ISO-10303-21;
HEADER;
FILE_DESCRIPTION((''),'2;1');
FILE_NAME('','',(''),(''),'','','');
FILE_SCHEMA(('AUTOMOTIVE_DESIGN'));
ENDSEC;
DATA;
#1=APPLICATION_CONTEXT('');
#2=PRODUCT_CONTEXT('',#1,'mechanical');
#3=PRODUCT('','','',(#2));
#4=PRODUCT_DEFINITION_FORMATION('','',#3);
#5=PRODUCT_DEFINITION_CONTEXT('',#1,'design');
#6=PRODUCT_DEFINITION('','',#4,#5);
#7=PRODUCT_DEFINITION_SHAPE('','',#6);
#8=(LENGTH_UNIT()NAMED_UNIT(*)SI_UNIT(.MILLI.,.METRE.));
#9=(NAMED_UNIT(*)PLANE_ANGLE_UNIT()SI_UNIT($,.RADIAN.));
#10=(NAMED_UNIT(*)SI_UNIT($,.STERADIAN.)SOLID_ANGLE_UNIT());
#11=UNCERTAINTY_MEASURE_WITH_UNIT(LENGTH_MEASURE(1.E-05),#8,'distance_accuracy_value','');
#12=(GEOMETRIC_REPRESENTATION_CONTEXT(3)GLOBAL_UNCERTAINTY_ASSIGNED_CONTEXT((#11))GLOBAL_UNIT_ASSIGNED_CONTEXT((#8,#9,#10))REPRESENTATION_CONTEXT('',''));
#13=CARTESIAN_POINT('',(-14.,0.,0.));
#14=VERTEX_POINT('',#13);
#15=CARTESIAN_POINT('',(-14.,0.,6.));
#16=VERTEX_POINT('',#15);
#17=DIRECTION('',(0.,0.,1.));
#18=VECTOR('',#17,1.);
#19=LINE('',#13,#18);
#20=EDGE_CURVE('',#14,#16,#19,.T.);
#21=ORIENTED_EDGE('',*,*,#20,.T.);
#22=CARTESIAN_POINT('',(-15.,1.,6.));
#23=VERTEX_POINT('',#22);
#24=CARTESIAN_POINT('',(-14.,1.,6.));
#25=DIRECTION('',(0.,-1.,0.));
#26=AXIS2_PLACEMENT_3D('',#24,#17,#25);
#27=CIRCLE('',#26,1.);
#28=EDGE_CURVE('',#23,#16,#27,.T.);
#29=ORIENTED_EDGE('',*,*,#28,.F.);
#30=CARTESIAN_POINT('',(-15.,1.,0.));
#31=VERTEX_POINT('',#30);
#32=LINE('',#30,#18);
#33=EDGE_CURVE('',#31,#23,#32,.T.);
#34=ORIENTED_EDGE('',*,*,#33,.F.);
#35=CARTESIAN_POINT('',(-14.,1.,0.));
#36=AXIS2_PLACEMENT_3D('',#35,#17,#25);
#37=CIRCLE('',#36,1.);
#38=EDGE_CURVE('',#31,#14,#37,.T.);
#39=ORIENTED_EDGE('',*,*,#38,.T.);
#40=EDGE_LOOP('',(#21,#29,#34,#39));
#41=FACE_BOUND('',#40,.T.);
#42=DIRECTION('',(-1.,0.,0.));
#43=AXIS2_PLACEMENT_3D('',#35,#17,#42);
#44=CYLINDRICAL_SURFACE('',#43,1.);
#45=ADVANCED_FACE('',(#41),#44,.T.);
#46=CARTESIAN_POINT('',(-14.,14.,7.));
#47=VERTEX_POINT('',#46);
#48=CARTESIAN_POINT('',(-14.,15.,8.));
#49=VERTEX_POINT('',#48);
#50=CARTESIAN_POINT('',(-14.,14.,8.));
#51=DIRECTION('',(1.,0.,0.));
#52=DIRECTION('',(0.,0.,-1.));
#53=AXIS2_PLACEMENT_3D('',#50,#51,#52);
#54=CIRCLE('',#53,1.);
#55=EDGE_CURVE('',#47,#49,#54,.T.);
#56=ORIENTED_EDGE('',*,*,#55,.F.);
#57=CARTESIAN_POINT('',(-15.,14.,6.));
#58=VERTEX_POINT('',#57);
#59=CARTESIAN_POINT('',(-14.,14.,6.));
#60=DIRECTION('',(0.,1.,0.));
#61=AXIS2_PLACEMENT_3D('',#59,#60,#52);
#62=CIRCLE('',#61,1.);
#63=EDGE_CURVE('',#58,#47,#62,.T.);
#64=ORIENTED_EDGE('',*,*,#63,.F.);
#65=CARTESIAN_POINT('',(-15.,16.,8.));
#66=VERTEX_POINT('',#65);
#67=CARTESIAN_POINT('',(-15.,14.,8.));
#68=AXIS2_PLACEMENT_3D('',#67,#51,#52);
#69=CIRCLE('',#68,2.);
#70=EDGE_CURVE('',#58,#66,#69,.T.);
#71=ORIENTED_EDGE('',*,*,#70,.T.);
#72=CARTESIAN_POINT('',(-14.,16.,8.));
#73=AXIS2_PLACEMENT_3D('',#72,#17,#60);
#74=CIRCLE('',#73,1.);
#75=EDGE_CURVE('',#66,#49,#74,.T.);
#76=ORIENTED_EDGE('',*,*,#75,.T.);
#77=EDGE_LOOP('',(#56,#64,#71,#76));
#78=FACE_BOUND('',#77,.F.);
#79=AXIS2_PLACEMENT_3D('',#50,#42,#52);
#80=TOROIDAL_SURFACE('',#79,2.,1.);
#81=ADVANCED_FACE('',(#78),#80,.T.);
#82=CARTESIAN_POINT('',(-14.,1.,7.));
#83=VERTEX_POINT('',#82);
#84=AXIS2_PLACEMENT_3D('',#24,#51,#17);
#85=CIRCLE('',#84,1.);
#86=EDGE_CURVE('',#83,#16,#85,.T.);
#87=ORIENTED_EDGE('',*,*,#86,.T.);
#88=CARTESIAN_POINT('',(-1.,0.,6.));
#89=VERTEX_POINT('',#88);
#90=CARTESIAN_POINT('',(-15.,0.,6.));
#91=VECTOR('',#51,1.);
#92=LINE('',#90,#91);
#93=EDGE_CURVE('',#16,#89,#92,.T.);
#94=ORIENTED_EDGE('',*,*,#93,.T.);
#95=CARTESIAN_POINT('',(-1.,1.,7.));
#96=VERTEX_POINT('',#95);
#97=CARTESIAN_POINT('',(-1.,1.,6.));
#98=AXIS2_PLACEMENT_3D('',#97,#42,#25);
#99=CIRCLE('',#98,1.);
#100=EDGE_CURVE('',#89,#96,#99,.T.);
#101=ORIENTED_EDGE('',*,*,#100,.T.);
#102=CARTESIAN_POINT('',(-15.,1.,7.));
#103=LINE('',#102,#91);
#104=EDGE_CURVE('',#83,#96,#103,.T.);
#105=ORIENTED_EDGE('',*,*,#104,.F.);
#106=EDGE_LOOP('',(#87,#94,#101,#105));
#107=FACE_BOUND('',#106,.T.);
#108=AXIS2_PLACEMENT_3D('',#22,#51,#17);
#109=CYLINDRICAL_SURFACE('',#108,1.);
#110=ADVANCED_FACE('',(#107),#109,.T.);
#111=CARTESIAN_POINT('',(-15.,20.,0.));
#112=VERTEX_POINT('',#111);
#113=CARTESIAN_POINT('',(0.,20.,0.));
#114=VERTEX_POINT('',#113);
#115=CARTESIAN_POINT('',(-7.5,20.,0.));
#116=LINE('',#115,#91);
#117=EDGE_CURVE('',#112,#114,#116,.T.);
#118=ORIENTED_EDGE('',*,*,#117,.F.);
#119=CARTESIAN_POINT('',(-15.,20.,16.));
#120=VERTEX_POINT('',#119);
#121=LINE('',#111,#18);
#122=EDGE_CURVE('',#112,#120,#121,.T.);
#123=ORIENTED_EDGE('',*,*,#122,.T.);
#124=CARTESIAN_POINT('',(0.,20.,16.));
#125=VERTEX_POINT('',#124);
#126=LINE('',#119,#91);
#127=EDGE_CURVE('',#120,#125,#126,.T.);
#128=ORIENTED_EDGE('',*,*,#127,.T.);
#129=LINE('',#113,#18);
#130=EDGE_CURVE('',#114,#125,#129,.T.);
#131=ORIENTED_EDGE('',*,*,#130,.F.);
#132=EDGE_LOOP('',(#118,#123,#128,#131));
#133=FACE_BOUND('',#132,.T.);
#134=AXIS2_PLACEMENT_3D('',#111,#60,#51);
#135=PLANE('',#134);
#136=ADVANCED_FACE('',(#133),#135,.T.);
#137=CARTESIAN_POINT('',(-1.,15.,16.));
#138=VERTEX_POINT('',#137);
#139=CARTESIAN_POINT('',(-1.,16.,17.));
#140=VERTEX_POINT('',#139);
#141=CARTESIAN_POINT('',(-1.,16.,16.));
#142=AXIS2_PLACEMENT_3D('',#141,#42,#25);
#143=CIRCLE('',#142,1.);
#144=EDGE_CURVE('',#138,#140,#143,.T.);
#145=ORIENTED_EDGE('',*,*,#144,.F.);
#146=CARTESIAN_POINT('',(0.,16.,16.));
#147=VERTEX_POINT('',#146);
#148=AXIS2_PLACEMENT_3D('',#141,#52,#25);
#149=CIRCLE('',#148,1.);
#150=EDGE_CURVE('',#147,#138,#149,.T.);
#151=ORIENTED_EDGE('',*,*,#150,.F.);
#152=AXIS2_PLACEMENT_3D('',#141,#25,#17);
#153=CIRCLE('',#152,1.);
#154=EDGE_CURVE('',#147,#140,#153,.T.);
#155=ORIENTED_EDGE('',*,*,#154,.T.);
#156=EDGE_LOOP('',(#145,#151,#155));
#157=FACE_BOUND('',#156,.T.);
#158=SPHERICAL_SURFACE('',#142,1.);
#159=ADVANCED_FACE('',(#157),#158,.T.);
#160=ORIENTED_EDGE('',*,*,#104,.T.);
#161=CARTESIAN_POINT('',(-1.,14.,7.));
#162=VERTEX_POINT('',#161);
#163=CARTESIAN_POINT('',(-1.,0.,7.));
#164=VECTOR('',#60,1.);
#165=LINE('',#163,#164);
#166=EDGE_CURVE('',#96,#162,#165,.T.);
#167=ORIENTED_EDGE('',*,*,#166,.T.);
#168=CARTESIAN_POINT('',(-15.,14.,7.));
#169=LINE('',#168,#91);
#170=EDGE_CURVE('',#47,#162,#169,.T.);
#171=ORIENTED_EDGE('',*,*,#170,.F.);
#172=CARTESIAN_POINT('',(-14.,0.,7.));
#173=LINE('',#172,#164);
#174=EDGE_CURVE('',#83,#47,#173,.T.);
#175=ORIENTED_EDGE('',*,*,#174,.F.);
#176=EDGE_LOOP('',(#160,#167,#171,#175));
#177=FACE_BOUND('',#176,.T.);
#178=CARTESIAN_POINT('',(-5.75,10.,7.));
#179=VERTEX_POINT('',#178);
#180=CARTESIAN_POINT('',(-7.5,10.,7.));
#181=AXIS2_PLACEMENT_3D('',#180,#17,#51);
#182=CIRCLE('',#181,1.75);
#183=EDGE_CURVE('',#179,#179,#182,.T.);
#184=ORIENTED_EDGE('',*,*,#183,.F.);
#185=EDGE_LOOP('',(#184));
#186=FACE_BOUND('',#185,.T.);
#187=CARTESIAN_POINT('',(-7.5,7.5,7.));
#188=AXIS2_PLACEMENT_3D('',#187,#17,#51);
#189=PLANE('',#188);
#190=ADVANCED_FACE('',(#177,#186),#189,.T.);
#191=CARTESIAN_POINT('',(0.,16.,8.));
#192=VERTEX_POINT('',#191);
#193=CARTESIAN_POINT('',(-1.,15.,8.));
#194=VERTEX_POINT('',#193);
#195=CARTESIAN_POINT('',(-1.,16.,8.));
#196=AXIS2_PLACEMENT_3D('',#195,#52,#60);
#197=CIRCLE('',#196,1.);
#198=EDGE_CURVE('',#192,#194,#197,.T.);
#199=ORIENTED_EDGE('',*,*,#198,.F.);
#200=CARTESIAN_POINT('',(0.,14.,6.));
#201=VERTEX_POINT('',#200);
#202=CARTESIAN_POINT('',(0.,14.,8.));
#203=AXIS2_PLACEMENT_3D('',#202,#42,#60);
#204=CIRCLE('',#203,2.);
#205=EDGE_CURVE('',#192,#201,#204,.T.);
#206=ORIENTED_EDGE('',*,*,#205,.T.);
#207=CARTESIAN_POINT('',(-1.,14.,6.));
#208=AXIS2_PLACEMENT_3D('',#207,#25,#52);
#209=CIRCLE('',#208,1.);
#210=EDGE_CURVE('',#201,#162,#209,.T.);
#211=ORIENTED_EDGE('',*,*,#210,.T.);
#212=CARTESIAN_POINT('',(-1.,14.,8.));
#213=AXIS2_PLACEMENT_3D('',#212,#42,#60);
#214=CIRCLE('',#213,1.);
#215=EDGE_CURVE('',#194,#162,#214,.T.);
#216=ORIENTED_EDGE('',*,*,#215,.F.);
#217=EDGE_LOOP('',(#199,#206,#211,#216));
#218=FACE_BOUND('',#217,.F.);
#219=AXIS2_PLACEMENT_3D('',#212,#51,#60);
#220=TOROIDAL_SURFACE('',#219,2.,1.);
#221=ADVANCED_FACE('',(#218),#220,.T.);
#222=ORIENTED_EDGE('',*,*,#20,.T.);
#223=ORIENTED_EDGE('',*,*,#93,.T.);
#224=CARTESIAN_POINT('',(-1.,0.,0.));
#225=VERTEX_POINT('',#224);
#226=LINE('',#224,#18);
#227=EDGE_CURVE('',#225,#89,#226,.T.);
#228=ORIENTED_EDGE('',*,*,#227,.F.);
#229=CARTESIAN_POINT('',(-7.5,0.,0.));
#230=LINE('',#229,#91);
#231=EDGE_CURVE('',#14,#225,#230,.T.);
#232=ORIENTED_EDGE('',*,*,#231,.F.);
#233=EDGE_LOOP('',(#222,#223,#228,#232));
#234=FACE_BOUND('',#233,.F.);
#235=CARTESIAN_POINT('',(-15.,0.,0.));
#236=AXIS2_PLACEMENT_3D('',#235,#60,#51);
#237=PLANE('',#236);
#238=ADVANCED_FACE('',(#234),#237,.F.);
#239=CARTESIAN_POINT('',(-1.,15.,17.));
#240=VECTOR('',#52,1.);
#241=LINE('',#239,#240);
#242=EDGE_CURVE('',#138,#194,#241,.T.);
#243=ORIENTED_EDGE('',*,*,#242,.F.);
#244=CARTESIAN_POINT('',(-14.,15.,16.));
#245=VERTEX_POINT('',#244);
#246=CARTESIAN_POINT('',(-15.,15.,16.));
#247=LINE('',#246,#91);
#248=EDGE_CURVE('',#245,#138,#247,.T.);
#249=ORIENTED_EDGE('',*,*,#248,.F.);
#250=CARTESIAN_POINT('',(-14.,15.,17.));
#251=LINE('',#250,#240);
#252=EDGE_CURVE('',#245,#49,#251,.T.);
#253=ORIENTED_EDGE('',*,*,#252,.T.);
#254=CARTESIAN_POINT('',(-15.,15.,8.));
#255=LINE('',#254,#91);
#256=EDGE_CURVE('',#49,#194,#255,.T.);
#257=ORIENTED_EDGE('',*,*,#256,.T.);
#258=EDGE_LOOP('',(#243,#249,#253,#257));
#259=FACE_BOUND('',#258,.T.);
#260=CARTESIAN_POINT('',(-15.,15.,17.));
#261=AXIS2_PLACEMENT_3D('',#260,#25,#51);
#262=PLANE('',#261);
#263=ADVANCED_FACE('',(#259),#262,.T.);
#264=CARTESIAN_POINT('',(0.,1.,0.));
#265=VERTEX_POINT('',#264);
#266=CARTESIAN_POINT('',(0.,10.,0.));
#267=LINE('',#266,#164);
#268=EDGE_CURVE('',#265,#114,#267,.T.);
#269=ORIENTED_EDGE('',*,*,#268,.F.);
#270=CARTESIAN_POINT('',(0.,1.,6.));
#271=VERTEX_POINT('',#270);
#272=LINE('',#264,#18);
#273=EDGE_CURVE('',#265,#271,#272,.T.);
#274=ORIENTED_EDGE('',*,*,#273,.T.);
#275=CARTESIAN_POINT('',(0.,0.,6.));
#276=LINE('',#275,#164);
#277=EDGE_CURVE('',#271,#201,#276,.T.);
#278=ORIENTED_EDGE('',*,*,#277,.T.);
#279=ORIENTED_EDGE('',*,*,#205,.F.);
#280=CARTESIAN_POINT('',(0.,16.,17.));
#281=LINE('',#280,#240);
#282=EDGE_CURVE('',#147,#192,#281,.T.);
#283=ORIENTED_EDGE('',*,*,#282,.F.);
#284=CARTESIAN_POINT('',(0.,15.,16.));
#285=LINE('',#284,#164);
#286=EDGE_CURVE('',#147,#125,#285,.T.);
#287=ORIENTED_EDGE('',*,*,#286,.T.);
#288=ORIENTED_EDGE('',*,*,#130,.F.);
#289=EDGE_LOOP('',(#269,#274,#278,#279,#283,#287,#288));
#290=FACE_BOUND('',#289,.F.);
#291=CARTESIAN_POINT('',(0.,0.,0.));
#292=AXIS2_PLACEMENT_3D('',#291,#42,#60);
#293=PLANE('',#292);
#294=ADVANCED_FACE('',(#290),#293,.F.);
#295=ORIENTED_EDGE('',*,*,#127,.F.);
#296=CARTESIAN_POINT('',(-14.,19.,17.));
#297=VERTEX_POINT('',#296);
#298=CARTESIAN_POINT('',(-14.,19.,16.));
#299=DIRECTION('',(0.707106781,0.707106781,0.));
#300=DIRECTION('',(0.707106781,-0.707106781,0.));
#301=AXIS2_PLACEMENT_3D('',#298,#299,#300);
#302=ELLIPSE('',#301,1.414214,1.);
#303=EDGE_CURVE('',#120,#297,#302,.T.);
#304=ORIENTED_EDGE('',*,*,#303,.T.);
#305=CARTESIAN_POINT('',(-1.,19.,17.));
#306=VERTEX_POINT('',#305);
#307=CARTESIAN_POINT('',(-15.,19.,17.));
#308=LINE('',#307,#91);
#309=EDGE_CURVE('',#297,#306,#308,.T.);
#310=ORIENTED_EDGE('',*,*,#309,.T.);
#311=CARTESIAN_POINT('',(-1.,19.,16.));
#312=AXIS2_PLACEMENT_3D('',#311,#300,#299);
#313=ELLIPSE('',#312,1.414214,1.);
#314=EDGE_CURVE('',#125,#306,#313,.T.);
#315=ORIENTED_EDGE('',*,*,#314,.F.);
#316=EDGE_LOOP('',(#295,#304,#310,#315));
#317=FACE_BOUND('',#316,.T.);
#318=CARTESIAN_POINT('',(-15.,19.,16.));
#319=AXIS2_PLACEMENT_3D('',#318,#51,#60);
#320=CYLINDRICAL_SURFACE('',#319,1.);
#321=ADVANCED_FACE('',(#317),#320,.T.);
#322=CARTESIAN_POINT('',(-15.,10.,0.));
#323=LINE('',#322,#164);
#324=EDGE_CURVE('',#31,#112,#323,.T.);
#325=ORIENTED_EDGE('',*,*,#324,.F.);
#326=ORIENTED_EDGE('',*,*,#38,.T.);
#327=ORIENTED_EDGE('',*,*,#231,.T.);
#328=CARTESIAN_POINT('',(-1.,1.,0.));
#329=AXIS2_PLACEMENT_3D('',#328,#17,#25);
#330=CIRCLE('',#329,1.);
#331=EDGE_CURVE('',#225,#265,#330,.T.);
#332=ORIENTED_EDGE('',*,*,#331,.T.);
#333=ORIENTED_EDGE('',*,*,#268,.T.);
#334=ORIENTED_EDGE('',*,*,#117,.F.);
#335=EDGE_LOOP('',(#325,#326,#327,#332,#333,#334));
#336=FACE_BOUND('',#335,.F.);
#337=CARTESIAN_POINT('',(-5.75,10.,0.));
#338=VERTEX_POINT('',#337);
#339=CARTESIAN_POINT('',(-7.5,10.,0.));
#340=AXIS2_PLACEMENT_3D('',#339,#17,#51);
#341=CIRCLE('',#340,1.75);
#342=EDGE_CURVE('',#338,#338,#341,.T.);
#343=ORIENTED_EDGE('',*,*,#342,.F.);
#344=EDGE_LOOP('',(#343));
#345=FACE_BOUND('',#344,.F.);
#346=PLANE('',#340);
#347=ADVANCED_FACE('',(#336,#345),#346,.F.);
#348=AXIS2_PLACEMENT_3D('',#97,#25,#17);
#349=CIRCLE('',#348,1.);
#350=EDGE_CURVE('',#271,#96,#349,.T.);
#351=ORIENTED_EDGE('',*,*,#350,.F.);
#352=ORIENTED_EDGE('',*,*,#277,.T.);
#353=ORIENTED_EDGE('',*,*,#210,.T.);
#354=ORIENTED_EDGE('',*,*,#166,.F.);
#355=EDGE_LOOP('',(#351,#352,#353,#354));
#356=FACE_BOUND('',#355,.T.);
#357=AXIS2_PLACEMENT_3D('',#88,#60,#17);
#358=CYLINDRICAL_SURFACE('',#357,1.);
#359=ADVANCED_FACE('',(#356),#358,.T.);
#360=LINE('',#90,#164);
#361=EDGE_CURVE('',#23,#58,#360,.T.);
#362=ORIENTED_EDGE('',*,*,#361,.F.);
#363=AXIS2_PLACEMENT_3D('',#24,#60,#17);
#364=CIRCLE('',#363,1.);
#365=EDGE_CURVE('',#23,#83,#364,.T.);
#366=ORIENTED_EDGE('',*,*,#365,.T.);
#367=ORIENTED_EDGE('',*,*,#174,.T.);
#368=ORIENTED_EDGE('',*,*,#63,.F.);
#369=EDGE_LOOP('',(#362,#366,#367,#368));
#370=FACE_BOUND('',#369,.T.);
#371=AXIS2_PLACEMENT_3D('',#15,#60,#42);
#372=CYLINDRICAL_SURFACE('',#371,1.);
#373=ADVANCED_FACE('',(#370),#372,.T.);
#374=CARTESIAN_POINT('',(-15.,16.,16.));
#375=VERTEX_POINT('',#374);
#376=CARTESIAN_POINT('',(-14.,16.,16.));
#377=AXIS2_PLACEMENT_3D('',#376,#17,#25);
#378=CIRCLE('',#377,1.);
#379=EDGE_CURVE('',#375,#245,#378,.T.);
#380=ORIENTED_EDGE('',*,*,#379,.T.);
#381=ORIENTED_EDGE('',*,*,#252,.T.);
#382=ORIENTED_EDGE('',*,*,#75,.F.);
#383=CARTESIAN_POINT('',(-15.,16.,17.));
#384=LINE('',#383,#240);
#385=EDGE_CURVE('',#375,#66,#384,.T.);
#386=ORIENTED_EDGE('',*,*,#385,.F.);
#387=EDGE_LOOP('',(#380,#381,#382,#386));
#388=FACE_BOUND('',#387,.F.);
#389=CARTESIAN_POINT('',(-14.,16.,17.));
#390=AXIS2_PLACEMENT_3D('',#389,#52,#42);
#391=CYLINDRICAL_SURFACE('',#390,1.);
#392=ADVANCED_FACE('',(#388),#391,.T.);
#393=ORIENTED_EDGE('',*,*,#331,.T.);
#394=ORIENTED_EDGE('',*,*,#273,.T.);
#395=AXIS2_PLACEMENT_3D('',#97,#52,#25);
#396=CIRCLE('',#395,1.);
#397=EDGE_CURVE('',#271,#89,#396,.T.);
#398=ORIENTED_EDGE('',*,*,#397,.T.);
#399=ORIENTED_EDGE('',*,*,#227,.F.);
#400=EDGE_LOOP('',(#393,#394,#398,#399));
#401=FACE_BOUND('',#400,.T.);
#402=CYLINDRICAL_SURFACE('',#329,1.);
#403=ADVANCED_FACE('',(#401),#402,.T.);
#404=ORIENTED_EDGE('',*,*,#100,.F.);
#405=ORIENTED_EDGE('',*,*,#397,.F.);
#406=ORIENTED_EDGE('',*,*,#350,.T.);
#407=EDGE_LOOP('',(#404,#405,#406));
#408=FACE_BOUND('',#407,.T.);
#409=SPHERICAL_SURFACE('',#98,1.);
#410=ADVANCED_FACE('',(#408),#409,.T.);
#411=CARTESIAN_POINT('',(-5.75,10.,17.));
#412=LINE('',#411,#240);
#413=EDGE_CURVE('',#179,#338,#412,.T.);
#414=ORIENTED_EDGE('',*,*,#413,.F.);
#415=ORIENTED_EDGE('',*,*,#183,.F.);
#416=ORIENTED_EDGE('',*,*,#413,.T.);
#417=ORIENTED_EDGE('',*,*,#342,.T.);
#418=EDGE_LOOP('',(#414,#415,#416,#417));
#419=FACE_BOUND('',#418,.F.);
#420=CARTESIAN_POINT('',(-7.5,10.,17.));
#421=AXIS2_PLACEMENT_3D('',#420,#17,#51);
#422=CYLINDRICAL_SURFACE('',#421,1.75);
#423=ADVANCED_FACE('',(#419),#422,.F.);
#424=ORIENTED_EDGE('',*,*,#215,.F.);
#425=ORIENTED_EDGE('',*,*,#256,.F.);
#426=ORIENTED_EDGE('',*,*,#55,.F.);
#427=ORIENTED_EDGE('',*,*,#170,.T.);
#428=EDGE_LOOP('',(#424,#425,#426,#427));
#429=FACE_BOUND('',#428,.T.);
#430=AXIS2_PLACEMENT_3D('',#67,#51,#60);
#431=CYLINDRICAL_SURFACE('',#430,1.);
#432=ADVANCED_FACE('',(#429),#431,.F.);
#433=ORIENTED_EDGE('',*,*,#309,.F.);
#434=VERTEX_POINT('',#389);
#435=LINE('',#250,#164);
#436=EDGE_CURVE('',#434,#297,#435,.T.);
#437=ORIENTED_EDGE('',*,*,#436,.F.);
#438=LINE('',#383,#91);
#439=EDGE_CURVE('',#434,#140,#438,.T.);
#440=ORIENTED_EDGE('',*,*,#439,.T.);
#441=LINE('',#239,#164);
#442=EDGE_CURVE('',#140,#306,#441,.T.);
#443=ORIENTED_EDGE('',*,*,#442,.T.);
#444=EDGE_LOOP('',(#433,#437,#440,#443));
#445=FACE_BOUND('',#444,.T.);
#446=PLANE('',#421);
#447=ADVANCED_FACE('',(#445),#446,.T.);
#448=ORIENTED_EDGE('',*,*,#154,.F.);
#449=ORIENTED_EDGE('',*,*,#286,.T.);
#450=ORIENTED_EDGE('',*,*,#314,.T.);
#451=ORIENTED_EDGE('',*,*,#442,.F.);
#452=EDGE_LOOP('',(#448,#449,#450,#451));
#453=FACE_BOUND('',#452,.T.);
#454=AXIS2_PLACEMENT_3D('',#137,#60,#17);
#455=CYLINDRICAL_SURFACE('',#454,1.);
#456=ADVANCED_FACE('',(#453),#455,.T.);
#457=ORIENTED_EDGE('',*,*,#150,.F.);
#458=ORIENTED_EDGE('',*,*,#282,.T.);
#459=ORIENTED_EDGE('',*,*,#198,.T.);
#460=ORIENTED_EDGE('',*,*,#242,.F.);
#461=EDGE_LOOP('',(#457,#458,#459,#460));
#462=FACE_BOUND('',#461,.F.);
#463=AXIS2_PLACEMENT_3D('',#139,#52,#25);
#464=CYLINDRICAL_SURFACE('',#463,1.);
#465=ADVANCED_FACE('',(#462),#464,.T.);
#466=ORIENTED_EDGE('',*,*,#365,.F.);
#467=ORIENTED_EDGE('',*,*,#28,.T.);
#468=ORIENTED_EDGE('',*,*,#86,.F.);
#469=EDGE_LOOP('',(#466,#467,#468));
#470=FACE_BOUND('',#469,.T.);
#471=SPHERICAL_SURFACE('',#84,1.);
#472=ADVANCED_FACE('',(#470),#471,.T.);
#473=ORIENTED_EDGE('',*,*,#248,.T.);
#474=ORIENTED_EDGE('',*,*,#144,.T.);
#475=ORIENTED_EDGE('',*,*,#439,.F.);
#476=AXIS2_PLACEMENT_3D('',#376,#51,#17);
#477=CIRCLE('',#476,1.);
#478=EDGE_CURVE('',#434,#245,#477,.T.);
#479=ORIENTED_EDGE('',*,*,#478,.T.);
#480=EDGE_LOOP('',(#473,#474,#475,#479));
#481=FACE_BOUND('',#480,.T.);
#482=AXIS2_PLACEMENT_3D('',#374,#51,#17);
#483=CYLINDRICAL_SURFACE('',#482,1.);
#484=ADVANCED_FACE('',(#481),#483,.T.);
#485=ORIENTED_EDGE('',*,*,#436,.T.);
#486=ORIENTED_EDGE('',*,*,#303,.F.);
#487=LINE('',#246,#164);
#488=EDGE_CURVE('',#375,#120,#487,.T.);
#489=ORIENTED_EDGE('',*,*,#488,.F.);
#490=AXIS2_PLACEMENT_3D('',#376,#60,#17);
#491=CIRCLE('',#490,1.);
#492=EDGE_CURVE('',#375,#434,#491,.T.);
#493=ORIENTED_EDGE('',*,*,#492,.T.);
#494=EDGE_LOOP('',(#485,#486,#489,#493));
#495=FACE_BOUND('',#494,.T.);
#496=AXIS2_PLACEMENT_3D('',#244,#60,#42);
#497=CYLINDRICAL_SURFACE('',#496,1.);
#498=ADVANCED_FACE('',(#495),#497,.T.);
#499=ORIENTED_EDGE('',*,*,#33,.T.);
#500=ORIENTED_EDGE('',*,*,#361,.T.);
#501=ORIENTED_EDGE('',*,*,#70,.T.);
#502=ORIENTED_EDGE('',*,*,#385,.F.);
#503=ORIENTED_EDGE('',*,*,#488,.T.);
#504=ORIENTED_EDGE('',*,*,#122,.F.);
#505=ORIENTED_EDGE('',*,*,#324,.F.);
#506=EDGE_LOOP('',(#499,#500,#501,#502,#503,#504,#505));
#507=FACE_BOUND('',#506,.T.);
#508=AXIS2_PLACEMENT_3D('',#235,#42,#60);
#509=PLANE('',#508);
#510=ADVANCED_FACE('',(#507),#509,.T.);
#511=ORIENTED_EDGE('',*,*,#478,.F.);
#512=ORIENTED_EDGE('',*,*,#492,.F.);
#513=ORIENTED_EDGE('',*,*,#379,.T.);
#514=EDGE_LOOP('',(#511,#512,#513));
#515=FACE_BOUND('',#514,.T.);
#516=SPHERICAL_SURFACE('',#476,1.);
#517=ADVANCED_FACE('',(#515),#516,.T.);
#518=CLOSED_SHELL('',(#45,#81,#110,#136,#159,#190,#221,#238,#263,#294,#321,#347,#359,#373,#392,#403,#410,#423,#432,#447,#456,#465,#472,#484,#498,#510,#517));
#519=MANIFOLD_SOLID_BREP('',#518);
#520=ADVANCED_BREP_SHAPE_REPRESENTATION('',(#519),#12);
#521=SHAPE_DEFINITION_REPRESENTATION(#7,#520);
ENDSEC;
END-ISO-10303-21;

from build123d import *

# Parameters (mm, degrees)
F0_W     = 15
F0_H     = 20
F1_DEPTH = 17
F2_R     = 1.75
F3_DEPTH = 17.001
F2_W     = 15
F2_H     = 15
F4_DEPTH = 10
F5_R     = 1


with BuildPart() as f1:
    # F0 (on Top) → F1 (new body)
    with BuildSketch(Plane.XY):
        with Locations((-7.5, 10)):
            Rectangle(F0_W, F0_H)
    extrude(amount=F1_DEPTH)

    # F2 (on face) → F3 (cut, through all)
    with BuildSketch(Plane.XY.offset(17)):
        with Locations((-7.5, 10)):
            Circle(F2_R)
    extrude(amount=-F3_DEPTH, mode=Mode.SUBTRACT)

    # F2 (on face) → F4 (cut)
    with BuildSketch(Plane.XY.offset(17)):
        with Locations((-7.5, 7.5)):
            Rectangle(F2_W, F2_H)
        with Locations((-7.5, 10)):
            Circle(F2_R, mode=Mode.SUBTRACT)
    extrude(amount=-F4_DEPTH, mode=Mode.SUBTRACT)

    # F5
    f5_edges = [f1.edges().sort_by_distance(p)[0] for p in [
        (-7.5, 20, 17),
        (-7.5, 15, 17),
        (-7.5, 15, 7),
        (-7.5, 0, 7),
        (-15, 7.5, 7),
        (-15, 0, 3.5),
        (0, 15, 12),
        (0, 0, 3.5),
        (0, 17.5, 17),
        (-15, 17.5, 17),
        (0, 7.5, 7),
        (-15, 15, 12),
    ]]
    fillet(f5_edges, radius=F5_R)


solid = f1.part
